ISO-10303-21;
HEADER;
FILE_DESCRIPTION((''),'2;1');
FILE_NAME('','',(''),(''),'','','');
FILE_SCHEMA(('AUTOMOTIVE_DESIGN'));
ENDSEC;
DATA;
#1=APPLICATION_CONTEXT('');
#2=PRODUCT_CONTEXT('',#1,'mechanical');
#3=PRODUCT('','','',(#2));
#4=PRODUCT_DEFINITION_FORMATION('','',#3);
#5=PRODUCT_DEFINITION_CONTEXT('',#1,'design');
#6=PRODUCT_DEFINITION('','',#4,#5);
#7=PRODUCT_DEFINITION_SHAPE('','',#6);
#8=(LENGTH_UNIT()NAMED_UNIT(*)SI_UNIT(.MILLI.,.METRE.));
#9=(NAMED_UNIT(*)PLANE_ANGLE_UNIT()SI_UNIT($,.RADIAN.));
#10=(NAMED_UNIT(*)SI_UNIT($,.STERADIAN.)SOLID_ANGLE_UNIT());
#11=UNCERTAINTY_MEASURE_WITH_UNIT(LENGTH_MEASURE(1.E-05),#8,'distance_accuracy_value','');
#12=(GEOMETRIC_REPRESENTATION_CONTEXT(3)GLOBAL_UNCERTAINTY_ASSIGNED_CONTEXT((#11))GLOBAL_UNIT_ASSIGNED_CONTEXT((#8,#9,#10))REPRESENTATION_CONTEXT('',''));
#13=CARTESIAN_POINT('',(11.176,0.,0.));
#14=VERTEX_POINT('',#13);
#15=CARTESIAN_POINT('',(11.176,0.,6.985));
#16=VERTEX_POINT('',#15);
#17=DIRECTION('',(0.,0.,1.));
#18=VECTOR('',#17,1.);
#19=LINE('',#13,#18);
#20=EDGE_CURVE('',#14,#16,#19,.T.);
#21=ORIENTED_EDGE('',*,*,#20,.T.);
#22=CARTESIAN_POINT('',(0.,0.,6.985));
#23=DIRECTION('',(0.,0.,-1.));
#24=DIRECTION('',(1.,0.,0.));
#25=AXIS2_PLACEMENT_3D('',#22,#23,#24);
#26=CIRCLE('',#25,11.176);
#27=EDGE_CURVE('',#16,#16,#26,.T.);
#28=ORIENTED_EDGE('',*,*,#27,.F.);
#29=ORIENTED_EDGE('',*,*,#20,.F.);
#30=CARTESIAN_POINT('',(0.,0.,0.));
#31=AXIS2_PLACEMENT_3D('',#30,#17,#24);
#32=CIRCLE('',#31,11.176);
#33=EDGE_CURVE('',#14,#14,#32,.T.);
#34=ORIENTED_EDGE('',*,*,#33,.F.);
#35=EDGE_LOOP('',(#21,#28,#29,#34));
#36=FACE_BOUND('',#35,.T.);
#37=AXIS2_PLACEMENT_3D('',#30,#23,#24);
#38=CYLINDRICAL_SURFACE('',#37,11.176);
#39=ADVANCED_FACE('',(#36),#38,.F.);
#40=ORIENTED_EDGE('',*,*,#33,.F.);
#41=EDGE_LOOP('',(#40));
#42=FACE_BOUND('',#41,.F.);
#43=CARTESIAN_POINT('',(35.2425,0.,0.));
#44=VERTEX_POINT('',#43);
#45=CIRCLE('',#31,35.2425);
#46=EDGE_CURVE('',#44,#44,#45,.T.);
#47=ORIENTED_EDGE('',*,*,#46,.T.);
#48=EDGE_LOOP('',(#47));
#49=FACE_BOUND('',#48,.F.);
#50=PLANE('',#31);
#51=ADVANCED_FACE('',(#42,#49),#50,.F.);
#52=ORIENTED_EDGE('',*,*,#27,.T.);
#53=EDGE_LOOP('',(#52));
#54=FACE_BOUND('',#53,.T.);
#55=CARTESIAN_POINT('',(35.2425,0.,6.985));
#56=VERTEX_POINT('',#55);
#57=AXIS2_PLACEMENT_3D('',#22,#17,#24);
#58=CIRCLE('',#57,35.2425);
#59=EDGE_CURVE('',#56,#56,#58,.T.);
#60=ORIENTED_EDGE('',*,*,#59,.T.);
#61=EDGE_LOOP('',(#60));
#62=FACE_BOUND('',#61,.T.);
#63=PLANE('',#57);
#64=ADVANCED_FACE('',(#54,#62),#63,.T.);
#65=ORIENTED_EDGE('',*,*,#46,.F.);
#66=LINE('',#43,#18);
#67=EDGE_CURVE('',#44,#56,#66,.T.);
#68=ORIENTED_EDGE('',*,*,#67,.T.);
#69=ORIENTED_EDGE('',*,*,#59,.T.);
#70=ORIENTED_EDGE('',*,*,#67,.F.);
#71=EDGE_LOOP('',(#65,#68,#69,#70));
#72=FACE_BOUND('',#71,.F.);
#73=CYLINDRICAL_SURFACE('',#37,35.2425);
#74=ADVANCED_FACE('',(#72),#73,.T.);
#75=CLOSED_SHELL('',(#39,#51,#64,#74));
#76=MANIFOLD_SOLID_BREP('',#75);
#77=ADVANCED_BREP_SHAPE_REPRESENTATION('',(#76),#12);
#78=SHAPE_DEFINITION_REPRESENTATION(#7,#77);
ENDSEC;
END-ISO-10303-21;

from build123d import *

# Parameters (mm, degrees)
F0_R     = 35.2425
F0_R_2   = 11.176
F1_DEPTH = 6.985
F2_DEPTH = 6.986


# Not quite as in the source:
# - a feature names something its author has since deleted; it is built from what else it names


with BuildPart() as f1:
    # F0 (on Top) → F1 (new body)
    with BuildSketch(Plane.XY):
        Circle(F0_R)
        Circle(F0_R_2, mode=Mode.SUBTRACT)
        Circle(F0_R_2)
    extrude(amount=F1_DEPTH)

    # F0 (on Top) → F2 (cut, through all)
    with BuildSketch(Plane.XY):
        Circle(F0_R_2)
    extrude(amount=F2_DEPTH, mode=Mode.SUBTRACT)


solid = f1.part
